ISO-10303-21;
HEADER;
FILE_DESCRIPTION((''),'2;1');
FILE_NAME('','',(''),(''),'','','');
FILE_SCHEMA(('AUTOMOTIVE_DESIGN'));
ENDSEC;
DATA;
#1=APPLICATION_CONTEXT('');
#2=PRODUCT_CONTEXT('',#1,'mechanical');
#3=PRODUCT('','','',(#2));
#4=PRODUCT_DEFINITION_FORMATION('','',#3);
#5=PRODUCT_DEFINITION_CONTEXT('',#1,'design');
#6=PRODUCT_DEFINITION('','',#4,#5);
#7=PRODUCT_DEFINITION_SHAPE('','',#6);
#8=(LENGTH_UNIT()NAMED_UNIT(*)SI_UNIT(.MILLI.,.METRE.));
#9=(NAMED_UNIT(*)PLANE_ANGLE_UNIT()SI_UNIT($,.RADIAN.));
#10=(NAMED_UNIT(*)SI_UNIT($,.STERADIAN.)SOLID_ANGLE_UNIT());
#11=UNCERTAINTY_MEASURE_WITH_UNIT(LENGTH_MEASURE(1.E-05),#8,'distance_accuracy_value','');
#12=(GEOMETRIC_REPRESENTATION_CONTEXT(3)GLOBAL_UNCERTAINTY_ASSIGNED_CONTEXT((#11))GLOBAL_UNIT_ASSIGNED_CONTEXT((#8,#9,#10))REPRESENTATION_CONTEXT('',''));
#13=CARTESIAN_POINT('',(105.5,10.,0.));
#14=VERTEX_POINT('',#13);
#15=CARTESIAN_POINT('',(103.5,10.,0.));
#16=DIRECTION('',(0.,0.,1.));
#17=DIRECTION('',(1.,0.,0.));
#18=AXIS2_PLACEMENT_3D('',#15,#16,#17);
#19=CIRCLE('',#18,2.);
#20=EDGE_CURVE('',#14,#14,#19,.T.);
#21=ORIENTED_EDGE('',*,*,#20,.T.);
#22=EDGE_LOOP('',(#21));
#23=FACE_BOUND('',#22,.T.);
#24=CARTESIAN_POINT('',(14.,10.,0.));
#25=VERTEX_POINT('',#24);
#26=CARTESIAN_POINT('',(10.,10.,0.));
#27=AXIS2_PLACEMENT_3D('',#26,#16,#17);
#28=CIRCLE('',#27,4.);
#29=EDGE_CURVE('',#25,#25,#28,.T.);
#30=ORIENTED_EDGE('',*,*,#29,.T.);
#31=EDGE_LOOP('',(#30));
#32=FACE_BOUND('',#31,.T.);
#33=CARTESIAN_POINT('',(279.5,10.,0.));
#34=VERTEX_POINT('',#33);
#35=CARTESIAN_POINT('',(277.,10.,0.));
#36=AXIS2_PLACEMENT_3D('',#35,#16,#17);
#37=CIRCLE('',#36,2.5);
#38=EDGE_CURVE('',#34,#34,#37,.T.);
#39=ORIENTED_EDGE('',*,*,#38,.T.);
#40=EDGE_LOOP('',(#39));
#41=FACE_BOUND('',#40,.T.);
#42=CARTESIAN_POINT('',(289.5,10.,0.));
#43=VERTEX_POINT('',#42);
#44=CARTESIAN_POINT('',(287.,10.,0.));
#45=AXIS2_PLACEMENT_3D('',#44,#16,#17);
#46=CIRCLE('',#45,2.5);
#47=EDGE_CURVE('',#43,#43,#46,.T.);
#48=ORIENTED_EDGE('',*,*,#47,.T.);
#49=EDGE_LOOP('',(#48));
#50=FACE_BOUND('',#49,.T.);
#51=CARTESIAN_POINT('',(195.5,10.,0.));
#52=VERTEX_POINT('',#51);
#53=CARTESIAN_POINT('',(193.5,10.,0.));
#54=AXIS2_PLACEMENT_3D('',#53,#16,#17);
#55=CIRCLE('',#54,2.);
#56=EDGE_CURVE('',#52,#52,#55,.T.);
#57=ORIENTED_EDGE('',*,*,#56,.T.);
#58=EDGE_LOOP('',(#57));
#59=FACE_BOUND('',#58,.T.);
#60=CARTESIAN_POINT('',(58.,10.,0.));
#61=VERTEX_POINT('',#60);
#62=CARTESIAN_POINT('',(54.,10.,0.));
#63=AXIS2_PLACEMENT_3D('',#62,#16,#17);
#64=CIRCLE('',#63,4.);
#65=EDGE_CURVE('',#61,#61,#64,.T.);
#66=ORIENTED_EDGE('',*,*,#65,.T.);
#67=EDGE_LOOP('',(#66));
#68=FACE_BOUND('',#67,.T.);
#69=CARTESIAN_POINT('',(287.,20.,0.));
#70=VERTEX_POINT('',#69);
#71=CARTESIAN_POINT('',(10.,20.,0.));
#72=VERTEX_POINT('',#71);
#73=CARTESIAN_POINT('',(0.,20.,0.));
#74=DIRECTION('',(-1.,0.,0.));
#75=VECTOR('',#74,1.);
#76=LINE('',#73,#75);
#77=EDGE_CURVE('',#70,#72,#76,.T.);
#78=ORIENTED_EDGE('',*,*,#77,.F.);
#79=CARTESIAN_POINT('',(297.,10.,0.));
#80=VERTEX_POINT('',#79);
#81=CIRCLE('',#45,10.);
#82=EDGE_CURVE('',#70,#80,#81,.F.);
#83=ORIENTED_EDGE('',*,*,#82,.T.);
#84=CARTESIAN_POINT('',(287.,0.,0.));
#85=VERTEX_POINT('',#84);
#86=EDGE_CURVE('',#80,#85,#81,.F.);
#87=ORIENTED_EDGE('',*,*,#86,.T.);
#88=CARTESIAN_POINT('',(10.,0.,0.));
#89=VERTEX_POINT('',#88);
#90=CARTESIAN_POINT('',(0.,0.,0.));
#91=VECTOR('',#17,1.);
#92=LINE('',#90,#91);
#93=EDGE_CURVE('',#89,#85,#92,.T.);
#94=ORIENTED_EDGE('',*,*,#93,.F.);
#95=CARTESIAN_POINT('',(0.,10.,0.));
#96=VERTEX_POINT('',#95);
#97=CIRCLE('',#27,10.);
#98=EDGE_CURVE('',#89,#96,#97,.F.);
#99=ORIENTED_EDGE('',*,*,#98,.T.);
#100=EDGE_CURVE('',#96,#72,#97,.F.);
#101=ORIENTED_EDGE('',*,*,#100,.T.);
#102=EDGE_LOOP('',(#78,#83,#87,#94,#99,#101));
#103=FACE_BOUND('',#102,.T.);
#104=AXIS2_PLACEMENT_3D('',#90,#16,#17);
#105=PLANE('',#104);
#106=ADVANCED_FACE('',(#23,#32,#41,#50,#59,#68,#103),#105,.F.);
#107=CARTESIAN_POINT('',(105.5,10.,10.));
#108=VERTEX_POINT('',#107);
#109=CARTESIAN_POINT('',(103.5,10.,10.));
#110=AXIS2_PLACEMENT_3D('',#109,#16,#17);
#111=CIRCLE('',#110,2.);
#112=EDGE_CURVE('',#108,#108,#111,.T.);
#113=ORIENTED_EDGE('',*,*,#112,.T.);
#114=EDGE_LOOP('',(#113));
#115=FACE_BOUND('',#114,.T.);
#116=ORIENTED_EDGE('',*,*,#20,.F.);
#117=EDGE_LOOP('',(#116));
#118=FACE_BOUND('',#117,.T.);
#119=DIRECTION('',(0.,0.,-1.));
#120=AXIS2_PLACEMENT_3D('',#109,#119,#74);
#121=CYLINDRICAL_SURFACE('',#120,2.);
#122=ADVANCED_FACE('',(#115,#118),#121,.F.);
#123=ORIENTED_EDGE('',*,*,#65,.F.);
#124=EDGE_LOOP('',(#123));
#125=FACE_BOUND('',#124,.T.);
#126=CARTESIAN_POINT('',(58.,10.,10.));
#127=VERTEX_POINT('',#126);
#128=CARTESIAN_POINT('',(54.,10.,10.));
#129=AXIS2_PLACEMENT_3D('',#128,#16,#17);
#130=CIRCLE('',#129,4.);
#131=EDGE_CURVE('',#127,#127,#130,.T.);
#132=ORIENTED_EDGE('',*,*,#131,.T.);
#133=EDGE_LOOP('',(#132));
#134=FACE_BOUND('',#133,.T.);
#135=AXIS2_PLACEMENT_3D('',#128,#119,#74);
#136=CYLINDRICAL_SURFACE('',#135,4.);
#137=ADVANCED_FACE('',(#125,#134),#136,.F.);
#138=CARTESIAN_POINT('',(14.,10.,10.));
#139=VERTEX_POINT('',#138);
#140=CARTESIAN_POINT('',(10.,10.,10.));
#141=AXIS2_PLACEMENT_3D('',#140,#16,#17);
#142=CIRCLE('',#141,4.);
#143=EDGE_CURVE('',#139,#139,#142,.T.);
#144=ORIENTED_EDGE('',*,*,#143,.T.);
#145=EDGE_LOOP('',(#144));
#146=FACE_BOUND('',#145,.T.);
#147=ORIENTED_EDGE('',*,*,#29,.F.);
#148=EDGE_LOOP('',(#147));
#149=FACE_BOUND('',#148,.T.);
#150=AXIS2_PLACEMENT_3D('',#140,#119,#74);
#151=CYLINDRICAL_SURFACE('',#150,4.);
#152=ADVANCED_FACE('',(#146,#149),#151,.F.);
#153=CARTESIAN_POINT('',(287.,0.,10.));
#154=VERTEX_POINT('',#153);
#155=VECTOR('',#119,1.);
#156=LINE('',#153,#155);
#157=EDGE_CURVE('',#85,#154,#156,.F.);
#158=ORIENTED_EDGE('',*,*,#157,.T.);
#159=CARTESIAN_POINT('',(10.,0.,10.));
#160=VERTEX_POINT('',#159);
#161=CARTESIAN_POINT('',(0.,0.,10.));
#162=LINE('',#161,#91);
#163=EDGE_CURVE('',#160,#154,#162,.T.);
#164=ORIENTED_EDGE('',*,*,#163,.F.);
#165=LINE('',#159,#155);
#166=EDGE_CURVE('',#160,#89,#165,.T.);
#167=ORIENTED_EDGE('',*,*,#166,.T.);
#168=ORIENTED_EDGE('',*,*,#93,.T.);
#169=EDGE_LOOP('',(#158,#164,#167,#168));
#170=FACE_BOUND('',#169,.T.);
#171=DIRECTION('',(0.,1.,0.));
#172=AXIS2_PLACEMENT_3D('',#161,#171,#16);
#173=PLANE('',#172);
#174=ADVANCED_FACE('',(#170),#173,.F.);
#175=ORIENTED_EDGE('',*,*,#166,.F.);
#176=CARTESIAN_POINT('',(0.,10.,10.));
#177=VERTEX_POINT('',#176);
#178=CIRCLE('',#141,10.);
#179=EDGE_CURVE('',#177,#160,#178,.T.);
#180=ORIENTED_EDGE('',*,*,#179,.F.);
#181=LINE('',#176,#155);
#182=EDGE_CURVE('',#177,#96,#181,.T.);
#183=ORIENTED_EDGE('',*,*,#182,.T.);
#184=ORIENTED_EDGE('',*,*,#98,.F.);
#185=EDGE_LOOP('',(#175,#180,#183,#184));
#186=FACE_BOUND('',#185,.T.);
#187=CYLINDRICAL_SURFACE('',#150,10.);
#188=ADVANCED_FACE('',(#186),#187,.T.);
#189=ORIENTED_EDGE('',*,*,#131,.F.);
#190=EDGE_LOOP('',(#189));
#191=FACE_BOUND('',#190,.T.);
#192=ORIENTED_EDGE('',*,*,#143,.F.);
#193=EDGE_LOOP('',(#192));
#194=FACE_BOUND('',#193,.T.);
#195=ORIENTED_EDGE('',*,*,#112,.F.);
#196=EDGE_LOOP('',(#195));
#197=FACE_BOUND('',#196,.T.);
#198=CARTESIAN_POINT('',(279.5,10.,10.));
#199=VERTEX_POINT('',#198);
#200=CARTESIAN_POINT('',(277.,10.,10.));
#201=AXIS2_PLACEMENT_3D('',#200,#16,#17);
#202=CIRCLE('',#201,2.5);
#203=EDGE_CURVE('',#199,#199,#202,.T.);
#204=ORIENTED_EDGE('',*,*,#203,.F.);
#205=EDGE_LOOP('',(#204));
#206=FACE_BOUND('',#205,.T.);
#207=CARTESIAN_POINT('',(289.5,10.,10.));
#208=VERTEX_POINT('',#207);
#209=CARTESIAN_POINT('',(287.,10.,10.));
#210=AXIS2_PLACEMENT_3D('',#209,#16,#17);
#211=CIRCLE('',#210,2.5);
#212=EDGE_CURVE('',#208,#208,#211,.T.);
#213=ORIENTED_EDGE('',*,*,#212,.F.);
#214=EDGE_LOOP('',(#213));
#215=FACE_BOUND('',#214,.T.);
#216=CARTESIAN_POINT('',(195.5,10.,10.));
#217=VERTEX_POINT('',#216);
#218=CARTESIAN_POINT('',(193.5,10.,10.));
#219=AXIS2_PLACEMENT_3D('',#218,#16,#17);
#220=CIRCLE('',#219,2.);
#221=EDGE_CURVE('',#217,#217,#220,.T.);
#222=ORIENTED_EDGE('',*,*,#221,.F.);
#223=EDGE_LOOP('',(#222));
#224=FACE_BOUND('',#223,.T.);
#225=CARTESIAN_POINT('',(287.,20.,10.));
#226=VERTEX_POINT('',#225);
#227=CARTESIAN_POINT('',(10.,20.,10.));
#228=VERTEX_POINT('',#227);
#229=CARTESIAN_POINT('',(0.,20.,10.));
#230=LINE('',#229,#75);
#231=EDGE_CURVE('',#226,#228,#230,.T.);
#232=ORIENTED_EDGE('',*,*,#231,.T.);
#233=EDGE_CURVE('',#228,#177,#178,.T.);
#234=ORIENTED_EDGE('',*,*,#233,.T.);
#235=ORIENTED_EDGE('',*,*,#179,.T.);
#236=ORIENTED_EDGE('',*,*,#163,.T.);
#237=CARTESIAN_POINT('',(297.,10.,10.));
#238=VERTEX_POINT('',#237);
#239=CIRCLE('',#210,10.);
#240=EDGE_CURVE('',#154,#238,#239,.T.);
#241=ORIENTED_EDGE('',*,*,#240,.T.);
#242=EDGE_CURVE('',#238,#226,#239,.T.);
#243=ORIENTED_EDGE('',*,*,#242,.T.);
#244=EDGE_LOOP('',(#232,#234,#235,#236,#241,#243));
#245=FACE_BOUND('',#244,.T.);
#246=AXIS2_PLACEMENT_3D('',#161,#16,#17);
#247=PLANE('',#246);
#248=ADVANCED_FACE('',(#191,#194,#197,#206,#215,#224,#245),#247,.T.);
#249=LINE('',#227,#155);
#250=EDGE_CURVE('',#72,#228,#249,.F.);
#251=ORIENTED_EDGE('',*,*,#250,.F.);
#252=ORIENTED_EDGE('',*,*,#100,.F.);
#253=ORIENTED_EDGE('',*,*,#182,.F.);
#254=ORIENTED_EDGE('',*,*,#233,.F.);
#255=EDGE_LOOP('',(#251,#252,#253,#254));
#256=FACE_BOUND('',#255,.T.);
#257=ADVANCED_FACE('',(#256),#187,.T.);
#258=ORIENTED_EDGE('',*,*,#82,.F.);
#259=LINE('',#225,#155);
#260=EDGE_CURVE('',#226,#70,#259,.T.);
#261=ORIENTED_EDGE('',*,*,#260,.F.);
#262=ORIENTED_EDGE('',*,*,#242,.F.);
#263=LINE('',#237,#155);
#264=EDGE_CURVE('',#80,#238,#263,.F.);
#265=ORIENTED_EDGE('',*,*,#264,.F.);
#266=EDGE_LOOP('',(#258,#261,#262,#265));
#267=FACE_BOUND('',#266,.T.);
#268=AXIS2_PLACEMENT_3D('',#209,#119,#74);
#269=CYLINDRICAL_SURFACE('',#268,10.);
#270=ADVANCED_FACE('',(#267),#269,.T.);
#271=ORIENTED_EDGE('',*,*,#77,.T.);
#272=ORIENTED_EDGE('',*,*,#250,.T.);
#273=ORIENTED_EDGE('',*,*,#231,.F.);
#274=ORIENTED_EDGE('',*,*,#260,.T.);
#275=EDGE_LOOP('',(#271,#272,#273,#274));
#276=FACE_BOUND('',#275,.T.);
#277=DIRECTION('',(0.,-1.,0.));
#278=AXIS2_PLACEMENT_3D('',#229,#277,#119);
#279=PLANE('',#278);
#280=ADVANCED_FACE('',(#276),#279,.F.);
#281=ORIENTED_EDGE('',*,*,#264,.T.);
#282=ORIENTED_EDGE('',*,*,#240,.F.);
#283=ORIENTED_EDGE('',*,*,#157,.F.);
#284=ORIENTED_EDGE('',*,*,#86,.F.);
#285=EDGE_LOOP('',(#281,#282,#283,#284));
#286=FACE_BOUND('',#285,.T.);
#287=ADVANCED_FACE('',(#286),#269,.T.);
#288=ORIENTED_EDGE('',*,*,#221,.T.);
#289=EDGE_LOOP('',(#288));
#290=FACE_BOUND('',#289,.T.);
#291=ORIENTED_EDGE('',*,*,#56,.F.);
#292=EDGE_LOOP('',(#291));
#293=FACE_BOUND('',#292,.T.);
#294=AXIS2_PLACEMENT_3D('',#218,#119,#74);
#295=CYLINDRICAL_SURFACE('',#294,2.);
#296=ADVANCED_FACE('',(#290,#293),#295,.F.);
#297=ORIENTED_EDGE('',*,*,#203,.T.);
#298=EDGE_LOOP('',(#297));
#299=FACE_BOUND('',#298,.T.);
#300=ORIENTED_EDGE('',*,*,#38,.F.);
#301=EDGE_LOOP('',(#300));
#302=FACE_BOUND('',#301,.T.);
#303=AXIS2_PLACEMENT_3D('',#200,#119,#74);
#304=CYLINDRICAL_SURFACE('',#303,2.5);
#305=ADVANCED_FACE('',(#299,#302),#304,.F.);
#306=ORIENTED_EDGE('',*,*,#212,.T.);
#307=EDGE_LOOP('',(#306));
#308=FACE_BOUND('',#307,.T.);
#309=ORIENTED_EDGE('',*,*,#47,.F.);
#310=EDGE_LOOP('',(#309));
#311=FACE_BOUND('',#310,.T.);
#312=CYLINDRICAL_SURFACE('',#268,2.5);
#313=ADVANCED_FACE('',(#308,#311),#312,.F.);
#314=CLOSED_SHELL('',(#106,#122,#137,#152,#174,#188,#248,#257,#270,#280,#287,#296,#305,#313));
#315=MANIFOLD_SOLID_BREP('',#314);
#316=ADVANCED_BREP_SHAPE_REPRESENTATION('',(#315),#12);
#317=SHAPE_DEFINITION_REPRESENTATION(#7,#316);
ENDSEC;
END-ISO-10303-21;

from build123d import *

# Parameters (mm, degrees)
ESQUISSE1_W        = 297
ESQUISSE1_H        = 20
ESQUISSE1_R        = 4
ESQUISSE1_R_2      = 2.5
ESQUISSE1_R_3      = 2
BOSS_EXTRU_1_DEPTH = 10
CONG_1_R           = 10


with BuildPart() as part:
    # Esquisse1 → Boss.-Extru.1 (new body)
    with BuildSketch(Plane.XY):
        with Locations((148.5, 10)):
            Rectangle(ESQUISSE1_W, ESQUISSE1_H)
        with Locations((10, 10)):
            Circle(ESQUISSE1_R, mode=Mode.SUBTRACT)
        with Locations((54, 10)):
            Circle(ESQUISSE1_R, mode=Mode.SUBTRACT)
        with Locations((277, 10)):
            Circle(ESQUISSE1_R_2, mode=Mode.SUBTRACT)
        with Locations((287, 10)):
            Circle(ESQUISSE1_R_2, mode=Mode.SUBTRACT)
        with Locations((103.5, 10)):
            Circle(ESQUISSE1_R_3, mode=Mode.SUBTRACT)
        with Locations((193.5, 10)):
            Circle(ESQUISSE1_R_3, mode=Mode.SUBTRACT)
    extrude(amount=BOSS_EXTRU_1_DEPTH)

    # Congé1
    cong_1_edges = [part.edges().sort_by_distance(p)[0] for p in [
        (0, 0, 5),
        (0, 20, 5),
        (297, 0, 5),
        (297, 20, 5),
    ]]
    fillet(cong_1_edges, radius=CONG_1_R - 0.0001)  # a hair under: the kernel refuses the full size


solid = part.part
